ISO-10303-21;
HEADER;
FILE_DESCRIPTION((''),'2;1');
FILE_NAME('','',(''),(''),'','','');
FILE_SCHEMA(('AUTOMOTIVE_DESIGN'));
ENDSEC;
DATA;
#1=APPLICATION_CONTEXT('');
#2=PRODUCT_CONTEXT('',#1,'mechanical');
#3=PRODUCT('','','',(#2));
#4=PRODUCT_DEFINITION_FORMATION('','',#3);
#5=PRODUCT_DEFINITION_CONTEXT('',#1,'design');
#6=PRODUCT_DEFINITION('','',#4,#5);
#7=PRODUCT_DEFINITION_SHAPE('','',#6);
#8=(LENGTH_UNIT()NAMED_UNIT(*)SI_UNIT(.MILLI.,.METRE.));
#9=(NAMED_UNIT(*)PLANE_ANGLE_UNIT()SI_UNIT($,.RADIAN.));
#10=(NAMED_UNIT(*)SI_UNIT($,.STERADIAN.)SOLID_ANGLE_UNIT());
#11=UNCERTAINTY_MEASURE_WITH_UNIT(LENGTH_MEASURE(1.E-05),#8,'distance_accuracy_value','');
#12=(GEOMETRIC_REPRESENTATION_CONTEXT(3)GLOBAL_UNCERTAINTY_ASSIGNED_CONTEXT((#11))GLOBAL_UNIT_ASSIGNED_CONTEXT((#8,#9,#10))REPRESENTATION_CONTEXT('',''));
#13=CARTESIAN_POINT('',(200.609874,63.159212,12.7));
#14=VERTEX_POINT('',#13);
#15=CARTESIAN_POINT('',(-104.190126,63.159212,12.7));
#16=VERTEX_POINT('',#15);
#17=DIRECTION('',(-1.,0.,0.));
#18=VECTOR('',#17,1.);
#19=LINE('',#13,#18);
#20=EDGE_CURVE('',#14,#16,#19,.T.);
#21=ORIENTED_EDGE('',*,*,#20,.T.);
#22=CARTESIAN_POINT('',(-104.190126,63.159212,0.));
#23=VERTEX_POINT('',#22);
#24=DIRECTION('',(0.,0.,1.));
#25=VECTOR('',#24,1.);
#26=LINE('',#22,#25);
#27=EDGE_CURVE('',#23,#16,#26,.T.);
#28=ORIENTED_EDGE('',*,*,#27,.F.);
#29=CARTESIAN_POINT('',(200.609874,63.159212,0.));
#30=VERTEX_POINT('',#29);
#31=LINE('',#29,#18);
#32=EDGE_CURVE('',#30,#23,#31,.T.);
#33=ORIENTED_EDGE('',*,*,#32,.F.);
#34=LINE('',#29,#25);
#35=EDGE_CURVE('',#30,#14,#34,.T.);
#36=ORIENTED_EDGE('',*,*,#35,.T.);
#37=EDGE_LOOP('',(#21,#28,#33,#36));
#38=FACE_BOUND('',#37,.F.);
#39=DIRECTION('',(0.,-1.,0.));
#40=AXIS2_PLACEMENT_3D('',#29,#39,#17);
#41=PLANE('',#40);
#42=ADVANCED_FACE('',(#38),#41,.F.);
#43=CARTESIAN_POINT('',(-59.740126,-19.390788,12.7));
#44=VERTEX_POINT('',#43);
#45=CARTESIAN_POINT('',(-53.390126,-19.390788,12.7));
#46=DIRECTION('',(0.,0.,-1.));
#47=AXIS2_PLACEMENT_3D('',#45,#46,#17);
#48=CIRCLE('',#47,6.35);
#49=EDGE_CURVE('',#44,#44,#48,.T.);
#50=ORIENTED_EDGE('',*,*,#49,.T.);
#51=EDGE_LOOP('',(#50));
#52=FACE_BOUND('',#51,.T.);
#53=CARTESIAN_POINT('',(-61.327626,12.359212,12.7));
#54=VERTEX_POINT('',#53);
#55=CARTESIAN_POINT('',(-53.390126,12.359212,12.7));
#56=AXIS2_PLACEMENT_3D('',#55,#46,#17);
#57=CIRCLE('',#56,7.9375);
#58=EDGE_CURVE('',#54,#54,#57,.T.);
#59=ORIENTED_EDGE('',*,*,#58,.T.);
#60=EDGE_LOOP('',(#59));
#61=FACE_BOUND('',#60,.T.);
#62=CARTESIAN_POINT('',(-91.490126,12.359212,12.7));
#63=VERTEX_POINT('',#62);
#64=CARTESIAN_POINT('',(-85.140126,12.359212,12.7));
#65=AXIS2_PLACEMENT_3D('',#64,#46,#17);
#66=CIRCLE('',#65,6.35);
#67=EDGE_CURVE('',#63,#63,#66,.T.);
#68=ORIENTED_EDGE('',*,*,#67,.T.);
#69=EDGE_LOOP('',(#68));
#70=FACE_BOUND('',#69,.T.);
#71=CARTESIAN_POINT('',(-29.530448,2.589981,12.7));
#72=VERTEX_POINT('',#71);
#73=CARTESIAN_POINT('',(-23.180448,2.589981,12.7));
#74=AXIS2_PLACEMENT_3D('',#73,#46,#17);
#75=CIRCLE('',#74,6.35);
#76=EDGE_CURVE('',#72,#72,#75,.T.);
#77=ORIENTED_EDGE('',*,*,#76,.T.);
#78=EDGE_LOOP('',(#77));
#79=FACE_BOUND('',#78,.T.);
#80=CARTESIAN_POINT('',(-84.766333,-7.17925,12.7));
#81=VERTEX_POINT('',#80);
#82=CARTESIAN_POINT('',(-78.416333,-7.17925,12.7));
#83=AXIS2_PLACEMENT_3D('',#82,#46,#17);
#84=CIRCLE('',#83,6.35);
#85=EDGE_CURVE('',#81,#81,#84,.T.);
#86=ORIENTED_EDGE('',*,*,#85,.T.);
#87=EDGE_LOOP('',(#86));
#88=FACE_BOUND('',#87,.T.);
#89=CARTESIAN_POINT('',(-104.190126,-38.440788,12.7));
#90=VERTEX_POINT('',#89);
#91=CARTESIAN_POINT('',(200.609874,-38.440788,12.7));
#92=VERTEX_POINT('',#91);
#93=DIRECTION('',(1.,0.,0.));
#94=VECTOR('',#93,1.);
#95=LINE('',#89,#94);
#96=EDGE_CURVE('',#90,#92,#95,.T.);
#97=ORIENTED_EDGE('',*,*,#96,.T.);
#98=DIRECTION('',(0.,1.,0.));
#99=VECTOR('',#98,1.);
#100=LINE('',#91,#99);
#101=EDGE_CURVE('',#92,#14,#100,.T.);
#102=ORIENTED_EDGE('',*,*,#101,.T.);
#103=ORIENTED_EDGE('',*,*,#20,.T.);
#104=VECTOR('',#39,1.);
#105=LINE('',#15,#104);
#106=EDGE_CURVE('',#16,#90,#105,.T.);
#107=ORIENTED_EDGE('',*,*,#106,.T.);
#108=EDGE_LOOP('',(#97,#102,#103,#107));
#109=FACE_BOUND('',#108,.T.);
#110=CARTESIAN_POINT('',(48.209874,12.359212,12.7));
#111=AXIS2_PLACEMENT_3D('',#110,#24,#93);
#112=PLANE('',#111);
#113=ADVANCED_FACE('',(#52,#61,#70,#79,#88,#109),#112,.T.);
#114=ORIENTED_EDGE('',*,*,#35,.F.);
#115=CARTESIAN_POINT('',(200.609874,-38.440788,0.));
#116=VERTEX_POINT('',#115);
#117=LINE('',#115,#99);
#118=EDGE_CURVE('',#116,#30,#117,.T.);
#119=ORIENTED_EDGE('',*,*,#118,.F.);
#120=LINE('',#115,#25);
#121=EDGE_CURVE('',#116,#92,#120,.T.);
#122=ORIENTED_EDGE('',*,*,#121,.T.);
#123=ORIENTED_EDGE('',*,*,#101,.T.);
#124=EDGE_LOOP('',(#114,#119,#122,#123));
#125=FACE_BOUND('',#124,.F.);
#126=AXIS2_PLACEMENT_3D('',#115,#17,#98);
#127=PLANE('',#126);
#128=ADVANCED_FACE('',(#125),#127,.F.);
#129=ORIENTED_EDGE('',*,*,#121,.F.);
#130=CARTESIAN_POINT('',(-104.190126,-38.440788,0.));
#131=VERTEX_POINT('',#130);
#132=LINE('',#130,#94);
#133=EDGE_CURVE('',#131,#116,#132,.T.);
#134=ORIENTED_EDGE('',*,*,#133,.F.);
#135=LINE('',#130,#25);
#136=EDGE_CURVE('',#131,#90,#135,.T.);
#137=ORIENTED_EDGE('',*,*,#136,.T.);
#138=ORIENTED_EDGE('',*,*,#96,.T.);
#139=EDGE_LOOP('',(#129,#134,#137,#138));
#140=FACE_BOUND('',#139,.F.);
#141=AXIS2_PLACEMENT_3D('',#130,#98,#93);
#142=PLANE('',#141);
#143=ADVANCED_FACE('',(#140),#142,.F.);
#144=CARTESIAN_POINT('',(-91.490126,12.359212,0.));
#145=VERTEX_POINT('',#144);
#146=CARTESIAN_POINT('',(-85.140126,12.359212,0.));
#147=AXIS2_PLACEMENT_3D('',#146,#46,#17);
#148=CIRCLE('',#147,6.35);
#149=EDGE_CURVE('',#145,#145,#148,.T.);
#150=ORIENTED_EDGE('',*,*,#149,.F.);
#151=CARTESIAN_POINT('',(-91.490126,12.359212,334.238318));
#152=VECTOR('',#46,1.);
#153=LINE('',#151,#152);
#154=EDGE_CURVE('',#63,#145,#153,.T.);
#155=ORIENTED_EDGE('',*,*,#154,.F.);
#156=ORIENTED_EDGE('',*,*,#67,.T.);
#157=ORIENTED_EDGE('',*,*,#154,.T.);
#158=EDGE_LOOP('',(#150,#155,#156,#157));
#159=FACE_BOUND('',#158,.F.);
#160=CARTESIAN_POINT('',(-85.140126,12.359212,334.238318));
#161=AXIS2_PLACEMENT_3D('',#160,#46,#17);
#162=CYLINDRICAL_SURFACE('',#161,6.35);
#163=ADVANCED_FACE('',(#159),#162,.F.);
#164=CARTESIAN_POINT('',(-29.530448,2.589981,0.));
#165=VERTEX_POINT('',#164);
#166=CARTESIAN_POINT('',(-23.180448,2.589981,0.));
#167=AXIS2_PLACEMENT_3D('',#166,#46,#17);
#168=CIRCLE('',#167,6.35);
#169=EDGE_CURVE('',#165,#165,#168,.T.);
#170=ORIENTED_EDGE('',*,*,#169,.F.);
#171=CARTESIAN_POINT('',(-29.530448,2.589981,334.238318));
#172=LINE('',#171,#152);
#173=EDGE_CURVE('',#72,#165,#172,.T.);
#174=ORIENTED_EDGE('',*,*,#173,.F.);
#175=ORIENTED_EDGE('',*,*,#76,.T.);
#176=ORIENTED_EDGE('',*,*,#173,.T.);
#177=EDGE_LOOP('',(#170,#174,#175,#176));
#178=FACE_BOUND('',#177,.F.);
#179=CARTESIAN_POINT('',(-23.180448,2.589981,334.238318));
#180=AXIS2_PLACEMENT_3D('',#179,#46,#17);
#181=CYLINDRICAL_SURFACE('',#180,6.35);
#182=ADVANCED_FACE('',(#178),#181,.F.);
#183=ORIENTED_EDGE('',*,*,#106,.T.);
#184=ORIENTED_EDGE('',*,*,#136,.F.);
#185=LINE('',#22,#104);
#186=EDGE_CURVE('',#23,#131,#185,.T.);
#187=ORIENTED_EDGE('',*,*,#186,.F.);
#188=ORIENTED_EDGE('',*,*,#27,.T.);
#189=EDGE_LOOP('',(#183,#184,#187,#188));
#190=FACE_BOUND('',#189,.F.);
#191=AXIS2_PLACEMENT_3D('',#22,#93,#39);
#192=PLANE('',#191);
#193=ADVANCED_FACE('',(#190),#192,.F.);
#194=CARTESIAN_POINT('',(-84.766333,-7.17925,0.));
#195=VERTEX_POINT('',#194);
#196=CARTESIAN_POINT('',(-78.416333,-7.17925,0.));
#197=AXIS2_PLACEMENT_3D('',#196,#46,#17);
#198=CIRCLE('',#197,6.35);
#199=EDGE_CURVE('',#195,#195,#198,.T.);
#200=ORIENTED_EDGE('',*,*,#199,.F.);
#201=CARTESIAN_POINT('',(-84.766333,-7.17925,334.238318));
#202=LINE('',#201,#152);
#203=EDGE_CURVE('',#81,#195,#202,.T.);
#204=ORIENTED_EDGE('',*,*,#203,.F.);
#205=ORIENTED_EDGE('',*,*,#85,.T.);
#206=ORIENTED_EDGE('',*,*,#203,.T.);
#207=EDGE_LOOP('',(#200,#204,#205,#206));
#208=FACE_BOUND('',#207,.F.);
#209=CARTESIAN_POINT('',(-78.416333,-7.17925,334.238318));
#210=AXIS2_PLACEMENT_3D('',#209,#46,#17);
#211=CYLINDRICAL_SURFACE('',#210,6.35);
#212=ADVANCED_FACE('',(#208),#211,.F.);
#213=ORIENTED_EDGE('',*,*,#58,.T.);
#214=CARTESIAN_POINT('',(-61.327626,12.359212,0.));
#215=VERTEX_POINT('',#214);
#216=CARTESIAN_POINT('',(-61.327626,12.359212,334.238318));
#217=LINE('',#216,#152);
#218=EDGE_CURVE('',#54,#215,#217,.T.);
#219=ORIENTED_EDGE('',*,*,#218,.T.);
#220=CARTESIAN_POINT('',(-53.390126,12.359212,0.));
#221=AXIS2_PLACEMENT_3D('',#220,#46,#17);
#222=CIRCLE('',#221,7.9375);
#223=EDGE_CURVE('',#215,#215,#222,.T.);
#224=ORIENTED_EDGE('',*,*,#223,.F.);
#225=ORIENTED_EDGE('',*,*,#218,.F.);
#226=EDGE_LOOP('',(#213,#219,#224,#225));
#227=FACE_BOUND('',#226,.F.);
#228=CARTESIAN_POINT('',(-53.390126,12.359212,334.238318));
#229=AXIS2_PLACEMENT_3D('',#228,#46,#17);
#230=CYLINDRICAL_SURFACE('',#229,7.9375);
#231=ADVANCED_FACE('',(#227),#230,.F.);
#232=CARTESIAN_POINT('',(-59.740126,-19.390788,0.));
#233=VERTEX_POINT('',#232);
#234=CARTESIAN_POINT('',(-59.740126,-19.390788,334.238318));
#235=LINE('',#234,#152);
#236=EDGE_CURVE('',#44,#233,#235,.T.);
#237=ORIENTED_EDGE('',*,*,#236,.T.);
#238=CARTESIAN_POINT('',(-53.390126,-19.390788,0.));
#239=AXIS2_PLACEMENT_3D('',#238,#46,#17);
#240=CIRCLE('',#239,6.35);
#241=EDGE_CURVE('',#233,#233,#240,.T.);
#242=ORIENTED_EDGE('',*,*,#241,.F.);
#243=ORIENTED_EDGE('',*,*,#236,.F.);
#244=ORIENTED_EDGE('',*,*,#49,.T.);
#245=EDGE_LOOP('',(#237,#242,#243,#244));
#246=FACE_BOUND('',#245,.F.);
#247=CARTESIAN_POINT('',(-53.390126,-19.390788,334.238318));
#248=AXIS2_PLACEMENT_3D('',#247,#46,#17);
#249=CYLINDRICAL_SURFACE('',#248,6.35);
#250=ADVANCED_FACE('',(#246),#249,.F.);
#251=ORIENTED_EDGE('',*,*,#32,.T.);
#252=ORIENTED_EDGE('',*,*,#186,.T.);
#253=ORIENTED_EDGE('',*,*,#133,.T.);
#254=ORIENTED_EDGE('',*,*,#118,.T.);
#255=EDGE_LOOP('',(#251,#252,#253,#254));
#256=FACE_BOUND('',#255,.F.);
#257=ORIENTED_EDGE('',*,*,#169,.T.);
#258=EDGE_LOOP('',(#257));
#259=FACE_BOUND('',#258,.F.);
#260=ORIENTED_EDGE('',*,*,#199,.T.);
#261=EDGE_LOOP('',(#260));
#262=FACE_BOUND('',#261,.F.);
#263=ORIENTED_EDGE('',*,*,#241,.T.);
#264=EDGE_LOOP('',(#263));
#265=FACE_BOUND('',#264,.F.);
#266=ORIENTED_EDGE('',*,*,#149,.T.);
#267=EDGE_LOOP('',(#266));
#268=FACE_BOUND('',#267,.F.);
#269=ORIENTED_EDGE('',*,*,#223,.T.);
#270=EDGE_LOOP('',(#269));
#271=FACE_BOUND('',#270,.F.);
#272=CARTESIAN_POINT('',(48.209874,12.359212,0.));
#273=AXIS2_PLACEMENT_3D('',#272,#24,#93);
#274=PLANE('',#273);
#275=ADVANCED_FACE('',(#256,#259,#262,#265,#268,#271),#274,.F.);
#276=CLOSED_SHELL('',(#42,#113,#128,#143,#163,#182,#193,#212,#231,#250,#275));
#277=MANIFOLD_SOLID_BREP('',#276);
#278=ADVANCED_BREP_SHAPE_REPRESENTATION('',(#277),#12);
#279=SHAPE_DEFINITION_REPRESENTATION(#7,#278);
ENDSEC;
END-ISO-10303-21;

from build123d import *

# Parameters (mm, degrees)
F0_R     = 1.27
F1_DEPTH = 12.7
F3_D     = 15.875
F6_D     = 12.7
F8_D     = 12.7


# Not quite as in the source:
# - a feature names something its author has since deleted; it is built from what else it names


with BuildPart() as f1:
    # F0 (on Top) → F1 (new body)
    with BuildSketch(Plane.XY):
        Polygon((200.6098739386, 63.1592117809), (-2.5901260614, 63.1592117809), (-104.1901260614, 63.1592117809), (-104.1901260614, -38.4407882191), (-2.5901260614, -38.4407882191), (200.6098739386, -38.4407882191), align=None)
        with Locations((-53.3901260614, -19.3907882191)):
            Circle(F0_R, mode=Mode.SUBTRACT)
        with Locations((-78.4163327398, -7.1792497576)):
            Circle(F0_R, mode=Mode.SUBTRACT)
        with Locations((-53.3901260614, 12.3592117809)):
            Circle(F0_R, mode=Mode.SUBTRACT)
        with Locations((-23.1804483045, 2.5899810116)):
            Circle(F0_R, mode=Mode.SUBTRACT)
        with Locations((-85.1401260614, 12.3592117809)):
            Circle(F0_R, mode=Mode.SUBTRACT)
        with Locations((-92.6627071454, 25.0592117809)):
            Circle(F0_R, mode=Mode.SUBTRACT)
        with Locations((-12.1151260614, 12.3592117809)):
            Circle(F0_R, mode=Mode.SUBTRACT)
        with Locations((-20.8560573795, 37.7592117809)):
            Circle(F0_R, mode=Mode.SUBTRACT)
        with Locations((-53.3901260614, 53.6342117809)):
            Circle(F0_R, mode=Mode.SUBTRACT)
        with Locations((-92.6627071454, 25.0592117809)):
            Circle(F0_R)
        with Locations((-53.3901260614, 53.6342117809)):
            Circle(F0_R)
        with Locations((-20.8560573795, 37.7592117809)):
            Circle(F0_R)
        with Locations((-12.1151260614, 12.3592117809)):
            Circle(F0_R)
    extrude(amount=F1_DEPTH)

    # F3 (through all)
    with Locations(Plane.XY.offset(12.7)):
        with Locations((-53.3901260614, 12.3592117809)):
            Hole(F3_D / 2)

    # F6 (through all)
    with Locations(Plane.XY.offset(12.7)):
        with Locations((-53.3901260614, -19.3907882191)):
            Hole(F6_D / 2)

    # F8 (through all)
    with Locations(Plane.XY.offset(12.7)):
        with Locations((-85.1401260614, 12.3592117809), (-78.4163327398, -7.1792497576), (-23.1804483045, 2.5899810116)):
            Hole(F8_D / 2)


solid = f1.part
